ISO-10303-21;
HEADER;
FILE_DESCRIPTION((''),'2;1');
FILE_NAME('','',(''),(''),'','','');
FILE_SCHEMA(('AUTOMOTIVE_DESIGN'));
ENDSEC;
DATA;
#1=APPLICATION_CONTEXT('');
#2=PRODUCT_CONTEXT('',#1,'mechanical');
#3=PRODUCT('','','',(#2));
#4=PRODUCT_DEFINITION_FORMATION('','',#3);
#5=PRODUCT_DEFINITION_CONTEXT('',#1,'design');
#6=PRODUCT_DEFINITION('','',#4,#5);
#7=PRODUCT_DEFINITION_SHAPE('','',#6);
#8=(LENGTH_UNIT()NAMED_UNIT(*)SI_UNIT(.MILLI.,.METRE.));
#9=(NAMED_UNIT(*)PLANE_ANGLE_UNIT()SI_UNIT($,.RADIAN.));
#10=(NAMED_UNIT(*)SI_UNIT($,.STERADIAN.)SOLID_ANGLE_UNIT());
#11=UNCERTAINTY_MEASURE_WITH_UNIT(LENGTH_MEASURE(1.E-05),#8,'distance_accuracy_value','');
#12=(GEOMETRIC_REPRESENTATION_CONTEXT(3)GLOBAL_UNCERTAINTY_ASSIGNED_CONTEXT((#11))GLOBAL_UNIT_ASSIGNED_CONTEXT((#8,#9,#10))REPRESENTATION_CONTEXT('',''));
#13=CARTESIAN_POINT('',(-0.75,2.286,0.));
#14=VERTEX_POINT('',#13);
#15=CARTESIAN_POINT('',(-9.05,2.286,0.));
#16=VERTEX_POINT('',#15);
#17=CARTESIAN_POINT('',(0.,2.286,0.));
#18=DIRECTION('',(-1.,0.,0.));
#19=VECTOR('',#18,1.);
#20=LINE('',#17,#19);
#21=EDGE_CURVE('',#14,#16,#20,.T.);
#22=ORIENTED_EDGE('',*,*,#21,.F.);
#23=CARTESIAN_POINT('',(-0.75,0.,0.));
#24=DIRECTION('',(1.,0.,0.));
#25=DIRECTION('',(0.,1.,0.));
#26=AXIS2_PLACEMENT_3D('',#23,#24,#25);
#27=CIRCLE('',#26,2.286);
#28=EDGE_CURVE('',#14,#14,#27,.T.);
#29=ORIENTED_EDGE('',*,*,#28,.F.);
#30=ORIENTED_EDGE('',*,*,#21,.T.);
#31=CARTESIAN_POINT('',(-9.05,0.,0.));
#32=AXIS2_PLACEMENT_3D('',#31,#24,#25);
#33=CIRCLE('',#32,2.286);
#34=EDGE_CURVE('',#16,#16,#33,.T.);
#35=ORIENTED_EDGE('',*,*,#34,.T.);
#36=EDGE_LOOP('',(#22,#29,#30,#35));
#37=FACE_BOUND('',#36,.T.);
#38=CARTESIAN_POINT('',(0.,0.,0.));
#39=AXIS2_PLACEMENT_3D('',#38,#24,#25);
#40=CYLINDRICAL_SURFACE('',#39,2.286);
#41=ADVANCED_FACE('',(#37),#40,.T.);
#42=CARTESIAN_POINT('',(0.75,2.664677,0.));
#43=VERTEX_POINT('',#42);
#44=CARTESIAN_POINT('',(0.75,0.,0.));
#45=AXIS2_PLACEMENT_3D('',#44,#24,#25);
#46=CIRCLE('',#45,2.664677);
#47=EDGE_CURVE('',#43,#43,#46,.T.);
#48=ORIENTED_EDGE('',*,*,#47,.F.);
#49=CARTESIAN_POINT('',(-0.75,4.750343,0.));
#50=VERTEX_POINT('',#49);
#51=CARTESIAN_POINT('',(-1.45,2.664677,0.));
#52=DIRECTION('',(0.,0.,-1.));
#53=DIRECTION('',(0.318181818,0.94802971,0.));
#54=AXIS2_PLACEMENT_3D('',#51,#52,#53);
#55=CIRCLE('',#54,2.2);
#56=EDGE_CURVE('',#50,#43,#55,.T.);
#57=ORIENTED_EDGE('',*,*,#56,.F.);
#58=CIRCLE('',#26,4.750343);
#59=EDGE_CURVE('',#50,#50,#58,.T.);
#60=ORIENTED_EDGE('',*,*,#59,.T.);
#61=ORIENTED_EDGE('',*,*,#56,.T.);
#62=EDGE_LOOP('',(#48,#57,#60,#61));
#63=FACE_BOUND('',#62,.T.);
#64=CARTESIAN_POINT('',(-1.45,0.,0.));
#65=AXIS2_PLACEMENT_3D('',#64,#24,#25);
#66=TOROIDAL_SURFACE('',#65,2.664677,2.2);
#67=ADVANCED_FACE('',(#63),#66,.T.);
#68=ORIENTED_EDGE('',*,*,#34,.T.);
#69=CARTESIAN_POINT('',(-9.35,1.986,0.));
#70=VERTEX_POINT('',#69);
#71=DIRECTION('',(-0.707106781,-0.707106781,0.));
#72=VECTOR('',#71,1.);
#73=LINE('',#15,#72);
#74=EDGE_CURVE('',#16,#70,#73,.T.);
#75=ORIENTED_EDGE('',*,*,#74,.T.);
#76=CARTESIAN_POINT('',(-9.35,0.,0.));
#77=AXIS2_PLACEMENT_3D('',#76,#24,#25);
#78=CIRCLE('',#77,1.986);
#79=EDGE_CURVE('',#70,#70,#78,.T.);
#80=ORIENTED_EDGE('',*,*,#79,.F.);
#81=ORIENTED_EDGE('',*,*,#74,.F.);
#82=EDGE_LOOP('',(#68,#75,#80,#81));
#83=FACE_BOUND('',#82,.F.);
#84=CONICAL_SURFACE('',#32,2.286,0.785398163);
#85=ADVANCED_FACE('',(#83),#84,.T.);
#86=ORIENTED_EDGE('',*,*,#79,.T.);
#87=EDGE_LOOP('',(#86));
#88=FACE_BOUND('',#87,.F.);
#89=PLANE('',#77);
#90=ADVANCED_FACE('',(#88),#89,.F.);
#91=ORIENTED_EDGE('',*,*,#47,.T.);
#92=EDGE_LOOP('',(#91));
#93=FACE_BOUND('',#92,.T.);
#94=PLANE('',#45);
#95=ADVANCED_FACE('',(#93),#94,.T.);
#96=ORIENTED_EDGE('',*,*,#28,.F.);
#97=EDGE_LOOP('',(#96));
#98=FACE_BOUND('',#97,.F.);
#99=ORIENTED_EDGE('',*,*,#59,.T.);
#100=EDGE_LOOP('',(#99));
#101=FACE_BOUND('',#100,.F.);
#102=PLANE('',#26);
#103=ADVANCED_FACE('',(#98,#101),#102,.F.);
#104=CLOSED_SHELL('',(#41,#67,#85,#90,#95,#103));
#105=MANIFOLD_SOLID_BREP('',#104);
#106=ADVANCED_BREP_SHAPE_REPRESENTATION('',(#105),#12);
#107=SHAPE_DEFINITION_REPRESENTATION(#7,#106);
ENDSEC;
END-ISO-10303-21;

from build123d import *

# Parameters (mm, degrees)
F6_R           = 2.286
F8_DEPTH       = 9.35
F9_SIZE        = 0.3
F10_R          = 4.7503425206
F11_DEPTH      = 0.75
F11_DEPTH_BACK = 0.75


# Not quite as in the source:
# - a fillet or chamfer that OpenCascade refuses, or shapes differently, is made with other operations: its cross-section is extruded or revolved along the edge and cut away or added
# - the program builds the solid bodies; features that only make, move or delete a surface that nothing else refers to are left out


with BuildPart() as f8:
    # F6 (on Right) → F8 (new body)
    with BuildSketch(Plane.YZ):
        Circle(F6_R)
    extrude(amount=-F8_DEPTH)

    # F9
    f9_edges = [f8.edges().sort_by_distance(p)[0] for p in [
        (-9.35, -2.286, 0),
    ]]
    chamfer(f9_edges, length=F9_SIZE)

    # F10 (on Right) → F11 (join, two sides)
    with BuildSketch(Plane.YZ) as f11_sk:
        Circle(F10_R)
    extrude(amount=F11_DEPTH)
    extrude(f11_sk.sketch, amount=-F11_DEPTH_BACK)

    # F12: fillet of radius 2.2 on 1 edges, made by hand

    # F12_s1 → F12_t2 (revolve, cut)
    with BuildSketch(Plane.XY):
        with BuildLine():
            ThreePointArc((-0.75, 4.7503425206), (0.3360571099, 3.949200417), (0.75, 2.6646771591))
            Line((0.75, 2.6646771591), (0.75, 4.7503425206))
            Line((0.75, 4.7503425206), (-0.75, 4.7503425206))
        make_face()
    revolve(axis=Axis((0.75, 0, 0), (1, 0, 0)), mode=Mode.SUBTRACT)


solid = f8.part
